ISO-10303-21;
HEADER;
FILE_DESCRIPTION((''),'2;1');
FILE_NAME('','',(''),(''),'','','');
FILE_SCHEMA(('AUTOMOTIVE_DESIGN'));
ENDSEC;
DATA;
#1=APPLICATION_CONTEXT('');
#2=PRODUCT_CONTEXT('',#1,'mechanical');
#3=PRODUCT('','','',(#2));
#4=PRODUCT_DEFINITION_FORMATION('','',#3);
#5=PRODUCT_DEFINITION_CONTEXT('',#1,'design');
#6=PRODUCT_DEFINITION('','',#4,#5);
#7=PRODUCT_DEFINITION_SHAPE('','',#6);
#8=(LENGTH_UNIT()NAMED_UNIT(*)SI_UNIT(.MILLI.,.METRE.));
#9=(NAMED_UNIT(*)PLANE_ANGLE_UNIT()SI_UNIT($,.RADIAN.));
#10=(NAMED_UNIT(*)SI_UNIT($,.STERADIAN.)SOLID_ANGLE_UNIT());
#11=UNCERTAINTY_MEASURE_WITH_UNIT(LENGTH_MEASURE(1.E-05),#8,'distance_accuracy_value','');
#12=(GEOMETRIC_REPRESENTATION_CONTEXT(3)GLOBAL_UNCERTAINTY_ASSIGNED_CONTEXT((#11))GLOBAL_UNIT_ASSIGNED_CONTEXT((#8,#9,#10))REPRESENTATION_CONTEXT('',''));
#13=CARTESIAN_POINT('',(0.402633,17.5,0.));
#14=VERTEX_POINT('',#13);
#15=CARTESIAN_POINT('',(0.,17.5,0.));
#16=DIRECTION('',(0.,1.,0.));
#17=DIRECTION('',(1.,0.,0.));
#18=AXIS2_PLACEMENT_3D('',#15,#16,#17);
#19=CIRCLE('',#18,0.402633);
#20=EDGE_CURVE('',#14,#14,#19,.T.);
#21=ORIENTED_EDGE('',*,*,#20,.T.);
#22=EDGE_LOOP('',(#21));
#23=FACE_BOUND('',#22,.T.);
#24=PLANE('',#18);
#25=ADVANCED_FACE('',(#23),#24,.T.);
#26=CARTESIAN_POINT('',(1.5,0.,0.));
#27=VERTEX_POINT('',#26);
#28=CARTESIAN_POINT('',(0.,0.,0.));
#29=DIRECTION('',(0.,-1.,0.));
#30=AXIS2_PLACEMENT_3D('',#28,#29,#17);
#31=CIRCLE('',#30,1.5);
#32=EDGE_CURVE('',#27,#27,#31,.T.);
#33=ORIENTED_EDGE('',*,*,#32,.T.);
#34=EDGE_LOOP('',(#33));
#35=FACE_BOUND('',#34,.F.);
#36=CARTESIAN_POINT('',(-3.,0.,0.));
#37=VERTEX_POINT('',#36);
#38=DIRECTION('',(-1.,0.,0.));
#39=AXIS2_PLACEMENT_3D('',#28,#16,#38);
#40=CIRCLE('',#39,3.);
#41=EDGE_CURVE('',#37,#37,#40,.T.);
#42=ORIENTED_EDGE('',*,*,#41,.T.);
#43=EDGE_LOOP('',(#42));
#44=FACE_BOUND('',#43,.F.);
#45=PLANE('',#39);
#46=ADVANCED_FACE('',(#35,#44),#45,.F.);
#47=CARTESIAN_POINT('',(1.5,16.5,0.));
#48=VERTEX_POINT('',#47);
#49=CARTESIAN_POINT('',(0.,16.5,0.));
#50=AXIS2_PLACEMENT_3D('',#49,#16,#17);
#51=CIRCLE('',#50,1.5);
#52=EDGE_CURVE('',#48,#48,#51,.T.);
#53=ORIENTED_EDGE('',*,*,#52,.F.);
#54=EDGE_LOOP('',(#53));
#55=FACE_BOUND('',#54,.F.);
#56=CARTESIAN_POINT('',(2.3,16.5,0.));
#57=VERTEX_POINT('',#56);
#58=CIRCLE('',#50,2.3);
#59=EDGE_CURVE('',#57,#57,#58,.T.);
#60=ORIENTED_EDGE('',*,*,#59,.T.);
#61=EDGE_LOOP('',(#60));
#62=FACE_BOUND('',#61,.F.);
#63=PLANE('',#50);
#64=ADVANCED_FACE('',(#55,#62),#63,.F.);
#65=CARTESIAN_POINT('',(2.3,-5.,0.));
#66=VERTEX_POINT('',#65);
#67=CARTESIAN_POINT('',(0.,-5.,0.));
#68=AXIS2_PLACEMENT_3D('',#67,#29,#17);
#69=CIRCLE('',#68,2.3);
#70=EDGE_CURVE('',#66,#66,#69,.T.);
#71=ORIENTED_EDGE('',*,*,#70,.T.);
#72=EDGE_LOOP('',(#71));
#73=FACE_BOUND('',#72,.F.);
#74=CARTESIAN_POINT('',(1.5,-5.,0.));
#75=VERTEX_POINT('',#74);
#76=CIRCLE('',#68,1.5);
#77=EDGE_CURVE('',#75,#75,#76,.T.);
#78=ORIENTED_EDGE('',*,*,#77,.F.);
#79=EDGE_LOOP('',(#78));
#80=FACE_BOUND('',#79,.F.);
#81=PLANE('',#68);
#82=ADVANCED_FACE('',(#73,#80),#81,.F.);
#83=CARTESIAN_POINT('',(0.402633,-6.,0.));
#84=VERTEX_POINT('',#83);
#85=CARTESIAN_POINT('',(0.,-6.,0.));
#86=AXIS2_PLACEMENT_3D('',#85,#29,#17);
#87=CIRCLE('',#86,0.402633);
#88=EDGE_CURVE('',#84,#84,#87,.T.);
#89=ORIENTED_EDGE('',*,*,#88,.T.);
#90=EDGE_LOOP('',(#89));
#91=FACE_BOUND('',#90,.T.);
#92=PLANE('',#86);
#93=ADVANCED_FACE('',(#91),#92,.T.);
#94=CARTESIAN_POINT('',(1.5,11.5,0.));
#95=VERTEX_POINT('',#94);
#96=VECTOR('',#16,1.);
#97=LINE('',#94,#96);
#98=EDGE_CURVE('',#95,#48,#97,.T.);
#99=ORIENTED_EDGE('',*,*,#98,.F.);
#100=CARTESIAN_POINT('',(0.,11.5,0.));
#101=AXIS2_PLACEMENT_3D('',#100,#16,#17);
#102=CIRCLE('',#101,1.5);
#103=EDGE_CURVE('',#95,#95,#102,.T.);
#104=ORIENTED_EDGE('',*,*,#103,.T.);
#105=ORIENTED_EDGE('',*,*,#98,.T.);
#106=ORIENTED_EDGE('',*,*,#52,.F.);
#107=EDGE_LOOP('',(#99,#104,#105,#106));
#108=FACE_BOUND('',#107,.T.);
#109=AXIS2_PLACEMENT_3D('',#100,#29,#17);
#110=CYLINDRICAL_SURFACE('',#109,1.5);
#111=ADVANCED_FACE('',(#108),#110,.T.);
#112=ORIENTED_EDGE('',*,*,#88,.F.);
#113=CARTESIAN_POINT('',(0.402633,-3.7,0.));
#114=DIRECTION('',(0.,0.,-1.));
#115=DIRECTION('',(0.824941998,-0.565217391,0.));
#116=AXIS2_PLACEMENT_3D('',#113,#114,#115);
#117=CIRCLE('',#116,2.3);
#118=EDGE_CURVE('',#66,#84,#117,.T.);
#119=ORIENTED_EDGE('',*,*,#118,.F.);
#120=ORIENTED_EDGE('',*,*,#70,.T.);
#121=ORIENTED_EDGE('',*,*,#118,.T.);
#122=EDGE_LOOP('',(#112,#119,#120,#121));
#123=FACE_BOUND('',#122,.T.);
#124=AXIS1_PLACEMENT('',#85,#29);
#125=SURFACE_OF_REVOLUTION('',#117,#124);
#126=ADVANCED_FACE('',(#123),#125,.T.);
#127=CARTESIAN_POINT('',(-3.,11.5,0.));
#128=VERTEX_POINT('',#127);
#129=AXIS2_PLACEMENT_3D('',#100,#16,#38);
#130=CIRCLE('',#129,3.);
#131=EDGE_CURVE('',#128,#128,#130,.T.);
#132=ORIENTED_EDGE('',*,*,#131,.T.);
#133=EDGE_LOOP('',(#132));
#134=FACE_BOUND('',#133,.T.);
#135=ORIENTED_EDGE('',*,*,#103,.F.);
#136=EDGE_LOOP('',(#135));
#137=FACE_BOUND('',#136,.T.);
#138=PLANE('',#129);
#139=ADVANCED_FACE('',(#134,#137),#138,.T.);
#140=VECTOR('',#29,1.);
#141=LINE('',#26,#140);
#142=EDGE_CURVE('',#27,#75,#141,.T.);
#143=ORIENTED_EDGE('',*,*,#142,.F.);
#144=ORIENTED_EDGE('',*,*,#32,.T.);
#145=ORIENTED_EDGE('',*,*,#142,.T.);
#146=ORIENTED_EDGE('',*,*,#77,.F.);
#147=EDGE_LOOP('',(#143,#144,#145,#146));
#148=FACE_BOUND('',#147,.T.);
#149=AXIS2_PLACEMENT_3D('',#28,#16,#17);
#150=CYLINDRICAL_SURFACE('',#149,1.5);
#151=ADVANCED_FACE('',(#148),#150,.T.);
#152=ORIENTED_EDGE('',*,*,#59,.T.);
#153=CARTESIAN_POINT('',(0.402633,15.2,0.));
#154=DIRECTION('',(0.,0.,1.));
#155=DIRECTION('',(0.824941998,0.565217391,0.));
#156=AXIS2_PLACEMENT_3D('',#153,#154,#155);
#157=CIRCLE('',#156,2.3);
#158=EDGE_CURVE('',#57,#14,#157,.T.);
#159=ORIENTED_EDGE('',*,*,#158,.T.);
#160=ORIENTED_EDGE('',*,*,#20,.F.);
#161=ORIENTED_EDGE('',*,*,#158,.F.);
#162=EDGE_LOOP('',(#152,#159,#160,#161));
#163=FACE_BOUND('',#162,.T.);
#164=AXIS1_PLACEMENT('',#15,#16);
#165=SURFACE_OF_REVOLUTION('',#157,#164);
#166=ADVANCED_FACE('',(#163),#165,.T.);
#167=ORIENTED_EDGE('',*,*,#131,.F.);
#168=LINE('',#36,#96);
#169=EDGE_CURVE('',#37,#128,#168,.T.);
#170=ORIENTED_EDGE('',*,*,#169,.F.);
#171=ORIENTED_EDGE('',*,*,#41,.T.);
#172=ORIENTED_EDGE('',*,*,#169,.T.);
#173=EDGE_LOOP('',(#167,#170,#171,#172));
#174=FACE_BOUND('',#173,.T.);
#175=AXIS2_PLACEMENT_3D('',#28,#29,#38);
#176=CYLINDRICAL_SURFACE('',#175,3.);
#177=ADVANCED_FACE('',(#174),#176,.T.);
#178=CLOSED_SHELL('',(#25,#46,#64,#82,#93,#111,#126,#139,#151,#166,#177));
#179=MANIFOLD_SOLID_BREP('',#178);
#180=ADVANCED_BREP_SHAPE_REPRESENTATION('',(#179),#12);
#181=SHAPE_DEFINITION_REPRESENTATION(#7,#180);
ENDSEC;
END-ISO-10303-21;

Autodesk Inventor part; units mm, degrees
ref_plane "YZ Plane" through (0, 0, 0) normal (1, 0, 0) x (0, 1, 0)
ref_plane "XZ Plane" through (0, 0, 0) normal (0, 1, 0) x (-1, 0, 0)
ref_plane "XY Plane" through (0, 0, 0) normal (0, 0, 1) x (1, 0, 0)
sketch "Sketch2" plane through (0, 0, 0) normal (0, 1, 0) x (-1, 0, 0)
  circle A0 centre (0, 0) radius 3
  dimension "d3" = 6
extrude "Extrusion2" add sketch "Sketch2" along normal blind 11.5
sketch "Sketch3" plane through (0, 11.5, 0) normal (0, 1, 0) x (1, 0, 0)
  circle A0 centre (0, 0) radius 3 projected
  circle A1 centre (0, 0) radius 1.5
  dimension "d6" = 3
extrude "Extrusion3" add sketch "Sketch3" along normal blind 5 contours A1
sketch "Sketch7" plane through (0, 0, 0) normal (0, -1, 0) x (1, 0, 0)
  circle A0 centre (0, 0) radius 1.5
  dimension "d16" = 3
extrude "Extrusion4" add sketch "Sketch7" along normal blind 5
sketch "Sketch8" plane through (0, -5, 0) normal (0, -1, 0) x (1, 0, 0)
  circle A0 centre (0, 0) radius 2.3
  dimension "d23" = 4.6
extrude "Extrusion5" add sketch "Sketch8" along normal blind 1
sketch "Sketch9" plane through (0, 16.5, 0) normal (0, 1, 0) x (1, 0, 0)
  circle A0 centre (0, 0) radius 2.3
  dimension "d26" = 4.6
extrude "Extrusion6" add sketch "Sketch9" along normal blind 1
fillet "Fillet2" radius 2.3 1 edges at (-2.3, 17.5, 0)
fillet "Fillet3" radius 2.3 1 edges at (-2.3, -6, 0)
properties part number "reverse gear link rod"
